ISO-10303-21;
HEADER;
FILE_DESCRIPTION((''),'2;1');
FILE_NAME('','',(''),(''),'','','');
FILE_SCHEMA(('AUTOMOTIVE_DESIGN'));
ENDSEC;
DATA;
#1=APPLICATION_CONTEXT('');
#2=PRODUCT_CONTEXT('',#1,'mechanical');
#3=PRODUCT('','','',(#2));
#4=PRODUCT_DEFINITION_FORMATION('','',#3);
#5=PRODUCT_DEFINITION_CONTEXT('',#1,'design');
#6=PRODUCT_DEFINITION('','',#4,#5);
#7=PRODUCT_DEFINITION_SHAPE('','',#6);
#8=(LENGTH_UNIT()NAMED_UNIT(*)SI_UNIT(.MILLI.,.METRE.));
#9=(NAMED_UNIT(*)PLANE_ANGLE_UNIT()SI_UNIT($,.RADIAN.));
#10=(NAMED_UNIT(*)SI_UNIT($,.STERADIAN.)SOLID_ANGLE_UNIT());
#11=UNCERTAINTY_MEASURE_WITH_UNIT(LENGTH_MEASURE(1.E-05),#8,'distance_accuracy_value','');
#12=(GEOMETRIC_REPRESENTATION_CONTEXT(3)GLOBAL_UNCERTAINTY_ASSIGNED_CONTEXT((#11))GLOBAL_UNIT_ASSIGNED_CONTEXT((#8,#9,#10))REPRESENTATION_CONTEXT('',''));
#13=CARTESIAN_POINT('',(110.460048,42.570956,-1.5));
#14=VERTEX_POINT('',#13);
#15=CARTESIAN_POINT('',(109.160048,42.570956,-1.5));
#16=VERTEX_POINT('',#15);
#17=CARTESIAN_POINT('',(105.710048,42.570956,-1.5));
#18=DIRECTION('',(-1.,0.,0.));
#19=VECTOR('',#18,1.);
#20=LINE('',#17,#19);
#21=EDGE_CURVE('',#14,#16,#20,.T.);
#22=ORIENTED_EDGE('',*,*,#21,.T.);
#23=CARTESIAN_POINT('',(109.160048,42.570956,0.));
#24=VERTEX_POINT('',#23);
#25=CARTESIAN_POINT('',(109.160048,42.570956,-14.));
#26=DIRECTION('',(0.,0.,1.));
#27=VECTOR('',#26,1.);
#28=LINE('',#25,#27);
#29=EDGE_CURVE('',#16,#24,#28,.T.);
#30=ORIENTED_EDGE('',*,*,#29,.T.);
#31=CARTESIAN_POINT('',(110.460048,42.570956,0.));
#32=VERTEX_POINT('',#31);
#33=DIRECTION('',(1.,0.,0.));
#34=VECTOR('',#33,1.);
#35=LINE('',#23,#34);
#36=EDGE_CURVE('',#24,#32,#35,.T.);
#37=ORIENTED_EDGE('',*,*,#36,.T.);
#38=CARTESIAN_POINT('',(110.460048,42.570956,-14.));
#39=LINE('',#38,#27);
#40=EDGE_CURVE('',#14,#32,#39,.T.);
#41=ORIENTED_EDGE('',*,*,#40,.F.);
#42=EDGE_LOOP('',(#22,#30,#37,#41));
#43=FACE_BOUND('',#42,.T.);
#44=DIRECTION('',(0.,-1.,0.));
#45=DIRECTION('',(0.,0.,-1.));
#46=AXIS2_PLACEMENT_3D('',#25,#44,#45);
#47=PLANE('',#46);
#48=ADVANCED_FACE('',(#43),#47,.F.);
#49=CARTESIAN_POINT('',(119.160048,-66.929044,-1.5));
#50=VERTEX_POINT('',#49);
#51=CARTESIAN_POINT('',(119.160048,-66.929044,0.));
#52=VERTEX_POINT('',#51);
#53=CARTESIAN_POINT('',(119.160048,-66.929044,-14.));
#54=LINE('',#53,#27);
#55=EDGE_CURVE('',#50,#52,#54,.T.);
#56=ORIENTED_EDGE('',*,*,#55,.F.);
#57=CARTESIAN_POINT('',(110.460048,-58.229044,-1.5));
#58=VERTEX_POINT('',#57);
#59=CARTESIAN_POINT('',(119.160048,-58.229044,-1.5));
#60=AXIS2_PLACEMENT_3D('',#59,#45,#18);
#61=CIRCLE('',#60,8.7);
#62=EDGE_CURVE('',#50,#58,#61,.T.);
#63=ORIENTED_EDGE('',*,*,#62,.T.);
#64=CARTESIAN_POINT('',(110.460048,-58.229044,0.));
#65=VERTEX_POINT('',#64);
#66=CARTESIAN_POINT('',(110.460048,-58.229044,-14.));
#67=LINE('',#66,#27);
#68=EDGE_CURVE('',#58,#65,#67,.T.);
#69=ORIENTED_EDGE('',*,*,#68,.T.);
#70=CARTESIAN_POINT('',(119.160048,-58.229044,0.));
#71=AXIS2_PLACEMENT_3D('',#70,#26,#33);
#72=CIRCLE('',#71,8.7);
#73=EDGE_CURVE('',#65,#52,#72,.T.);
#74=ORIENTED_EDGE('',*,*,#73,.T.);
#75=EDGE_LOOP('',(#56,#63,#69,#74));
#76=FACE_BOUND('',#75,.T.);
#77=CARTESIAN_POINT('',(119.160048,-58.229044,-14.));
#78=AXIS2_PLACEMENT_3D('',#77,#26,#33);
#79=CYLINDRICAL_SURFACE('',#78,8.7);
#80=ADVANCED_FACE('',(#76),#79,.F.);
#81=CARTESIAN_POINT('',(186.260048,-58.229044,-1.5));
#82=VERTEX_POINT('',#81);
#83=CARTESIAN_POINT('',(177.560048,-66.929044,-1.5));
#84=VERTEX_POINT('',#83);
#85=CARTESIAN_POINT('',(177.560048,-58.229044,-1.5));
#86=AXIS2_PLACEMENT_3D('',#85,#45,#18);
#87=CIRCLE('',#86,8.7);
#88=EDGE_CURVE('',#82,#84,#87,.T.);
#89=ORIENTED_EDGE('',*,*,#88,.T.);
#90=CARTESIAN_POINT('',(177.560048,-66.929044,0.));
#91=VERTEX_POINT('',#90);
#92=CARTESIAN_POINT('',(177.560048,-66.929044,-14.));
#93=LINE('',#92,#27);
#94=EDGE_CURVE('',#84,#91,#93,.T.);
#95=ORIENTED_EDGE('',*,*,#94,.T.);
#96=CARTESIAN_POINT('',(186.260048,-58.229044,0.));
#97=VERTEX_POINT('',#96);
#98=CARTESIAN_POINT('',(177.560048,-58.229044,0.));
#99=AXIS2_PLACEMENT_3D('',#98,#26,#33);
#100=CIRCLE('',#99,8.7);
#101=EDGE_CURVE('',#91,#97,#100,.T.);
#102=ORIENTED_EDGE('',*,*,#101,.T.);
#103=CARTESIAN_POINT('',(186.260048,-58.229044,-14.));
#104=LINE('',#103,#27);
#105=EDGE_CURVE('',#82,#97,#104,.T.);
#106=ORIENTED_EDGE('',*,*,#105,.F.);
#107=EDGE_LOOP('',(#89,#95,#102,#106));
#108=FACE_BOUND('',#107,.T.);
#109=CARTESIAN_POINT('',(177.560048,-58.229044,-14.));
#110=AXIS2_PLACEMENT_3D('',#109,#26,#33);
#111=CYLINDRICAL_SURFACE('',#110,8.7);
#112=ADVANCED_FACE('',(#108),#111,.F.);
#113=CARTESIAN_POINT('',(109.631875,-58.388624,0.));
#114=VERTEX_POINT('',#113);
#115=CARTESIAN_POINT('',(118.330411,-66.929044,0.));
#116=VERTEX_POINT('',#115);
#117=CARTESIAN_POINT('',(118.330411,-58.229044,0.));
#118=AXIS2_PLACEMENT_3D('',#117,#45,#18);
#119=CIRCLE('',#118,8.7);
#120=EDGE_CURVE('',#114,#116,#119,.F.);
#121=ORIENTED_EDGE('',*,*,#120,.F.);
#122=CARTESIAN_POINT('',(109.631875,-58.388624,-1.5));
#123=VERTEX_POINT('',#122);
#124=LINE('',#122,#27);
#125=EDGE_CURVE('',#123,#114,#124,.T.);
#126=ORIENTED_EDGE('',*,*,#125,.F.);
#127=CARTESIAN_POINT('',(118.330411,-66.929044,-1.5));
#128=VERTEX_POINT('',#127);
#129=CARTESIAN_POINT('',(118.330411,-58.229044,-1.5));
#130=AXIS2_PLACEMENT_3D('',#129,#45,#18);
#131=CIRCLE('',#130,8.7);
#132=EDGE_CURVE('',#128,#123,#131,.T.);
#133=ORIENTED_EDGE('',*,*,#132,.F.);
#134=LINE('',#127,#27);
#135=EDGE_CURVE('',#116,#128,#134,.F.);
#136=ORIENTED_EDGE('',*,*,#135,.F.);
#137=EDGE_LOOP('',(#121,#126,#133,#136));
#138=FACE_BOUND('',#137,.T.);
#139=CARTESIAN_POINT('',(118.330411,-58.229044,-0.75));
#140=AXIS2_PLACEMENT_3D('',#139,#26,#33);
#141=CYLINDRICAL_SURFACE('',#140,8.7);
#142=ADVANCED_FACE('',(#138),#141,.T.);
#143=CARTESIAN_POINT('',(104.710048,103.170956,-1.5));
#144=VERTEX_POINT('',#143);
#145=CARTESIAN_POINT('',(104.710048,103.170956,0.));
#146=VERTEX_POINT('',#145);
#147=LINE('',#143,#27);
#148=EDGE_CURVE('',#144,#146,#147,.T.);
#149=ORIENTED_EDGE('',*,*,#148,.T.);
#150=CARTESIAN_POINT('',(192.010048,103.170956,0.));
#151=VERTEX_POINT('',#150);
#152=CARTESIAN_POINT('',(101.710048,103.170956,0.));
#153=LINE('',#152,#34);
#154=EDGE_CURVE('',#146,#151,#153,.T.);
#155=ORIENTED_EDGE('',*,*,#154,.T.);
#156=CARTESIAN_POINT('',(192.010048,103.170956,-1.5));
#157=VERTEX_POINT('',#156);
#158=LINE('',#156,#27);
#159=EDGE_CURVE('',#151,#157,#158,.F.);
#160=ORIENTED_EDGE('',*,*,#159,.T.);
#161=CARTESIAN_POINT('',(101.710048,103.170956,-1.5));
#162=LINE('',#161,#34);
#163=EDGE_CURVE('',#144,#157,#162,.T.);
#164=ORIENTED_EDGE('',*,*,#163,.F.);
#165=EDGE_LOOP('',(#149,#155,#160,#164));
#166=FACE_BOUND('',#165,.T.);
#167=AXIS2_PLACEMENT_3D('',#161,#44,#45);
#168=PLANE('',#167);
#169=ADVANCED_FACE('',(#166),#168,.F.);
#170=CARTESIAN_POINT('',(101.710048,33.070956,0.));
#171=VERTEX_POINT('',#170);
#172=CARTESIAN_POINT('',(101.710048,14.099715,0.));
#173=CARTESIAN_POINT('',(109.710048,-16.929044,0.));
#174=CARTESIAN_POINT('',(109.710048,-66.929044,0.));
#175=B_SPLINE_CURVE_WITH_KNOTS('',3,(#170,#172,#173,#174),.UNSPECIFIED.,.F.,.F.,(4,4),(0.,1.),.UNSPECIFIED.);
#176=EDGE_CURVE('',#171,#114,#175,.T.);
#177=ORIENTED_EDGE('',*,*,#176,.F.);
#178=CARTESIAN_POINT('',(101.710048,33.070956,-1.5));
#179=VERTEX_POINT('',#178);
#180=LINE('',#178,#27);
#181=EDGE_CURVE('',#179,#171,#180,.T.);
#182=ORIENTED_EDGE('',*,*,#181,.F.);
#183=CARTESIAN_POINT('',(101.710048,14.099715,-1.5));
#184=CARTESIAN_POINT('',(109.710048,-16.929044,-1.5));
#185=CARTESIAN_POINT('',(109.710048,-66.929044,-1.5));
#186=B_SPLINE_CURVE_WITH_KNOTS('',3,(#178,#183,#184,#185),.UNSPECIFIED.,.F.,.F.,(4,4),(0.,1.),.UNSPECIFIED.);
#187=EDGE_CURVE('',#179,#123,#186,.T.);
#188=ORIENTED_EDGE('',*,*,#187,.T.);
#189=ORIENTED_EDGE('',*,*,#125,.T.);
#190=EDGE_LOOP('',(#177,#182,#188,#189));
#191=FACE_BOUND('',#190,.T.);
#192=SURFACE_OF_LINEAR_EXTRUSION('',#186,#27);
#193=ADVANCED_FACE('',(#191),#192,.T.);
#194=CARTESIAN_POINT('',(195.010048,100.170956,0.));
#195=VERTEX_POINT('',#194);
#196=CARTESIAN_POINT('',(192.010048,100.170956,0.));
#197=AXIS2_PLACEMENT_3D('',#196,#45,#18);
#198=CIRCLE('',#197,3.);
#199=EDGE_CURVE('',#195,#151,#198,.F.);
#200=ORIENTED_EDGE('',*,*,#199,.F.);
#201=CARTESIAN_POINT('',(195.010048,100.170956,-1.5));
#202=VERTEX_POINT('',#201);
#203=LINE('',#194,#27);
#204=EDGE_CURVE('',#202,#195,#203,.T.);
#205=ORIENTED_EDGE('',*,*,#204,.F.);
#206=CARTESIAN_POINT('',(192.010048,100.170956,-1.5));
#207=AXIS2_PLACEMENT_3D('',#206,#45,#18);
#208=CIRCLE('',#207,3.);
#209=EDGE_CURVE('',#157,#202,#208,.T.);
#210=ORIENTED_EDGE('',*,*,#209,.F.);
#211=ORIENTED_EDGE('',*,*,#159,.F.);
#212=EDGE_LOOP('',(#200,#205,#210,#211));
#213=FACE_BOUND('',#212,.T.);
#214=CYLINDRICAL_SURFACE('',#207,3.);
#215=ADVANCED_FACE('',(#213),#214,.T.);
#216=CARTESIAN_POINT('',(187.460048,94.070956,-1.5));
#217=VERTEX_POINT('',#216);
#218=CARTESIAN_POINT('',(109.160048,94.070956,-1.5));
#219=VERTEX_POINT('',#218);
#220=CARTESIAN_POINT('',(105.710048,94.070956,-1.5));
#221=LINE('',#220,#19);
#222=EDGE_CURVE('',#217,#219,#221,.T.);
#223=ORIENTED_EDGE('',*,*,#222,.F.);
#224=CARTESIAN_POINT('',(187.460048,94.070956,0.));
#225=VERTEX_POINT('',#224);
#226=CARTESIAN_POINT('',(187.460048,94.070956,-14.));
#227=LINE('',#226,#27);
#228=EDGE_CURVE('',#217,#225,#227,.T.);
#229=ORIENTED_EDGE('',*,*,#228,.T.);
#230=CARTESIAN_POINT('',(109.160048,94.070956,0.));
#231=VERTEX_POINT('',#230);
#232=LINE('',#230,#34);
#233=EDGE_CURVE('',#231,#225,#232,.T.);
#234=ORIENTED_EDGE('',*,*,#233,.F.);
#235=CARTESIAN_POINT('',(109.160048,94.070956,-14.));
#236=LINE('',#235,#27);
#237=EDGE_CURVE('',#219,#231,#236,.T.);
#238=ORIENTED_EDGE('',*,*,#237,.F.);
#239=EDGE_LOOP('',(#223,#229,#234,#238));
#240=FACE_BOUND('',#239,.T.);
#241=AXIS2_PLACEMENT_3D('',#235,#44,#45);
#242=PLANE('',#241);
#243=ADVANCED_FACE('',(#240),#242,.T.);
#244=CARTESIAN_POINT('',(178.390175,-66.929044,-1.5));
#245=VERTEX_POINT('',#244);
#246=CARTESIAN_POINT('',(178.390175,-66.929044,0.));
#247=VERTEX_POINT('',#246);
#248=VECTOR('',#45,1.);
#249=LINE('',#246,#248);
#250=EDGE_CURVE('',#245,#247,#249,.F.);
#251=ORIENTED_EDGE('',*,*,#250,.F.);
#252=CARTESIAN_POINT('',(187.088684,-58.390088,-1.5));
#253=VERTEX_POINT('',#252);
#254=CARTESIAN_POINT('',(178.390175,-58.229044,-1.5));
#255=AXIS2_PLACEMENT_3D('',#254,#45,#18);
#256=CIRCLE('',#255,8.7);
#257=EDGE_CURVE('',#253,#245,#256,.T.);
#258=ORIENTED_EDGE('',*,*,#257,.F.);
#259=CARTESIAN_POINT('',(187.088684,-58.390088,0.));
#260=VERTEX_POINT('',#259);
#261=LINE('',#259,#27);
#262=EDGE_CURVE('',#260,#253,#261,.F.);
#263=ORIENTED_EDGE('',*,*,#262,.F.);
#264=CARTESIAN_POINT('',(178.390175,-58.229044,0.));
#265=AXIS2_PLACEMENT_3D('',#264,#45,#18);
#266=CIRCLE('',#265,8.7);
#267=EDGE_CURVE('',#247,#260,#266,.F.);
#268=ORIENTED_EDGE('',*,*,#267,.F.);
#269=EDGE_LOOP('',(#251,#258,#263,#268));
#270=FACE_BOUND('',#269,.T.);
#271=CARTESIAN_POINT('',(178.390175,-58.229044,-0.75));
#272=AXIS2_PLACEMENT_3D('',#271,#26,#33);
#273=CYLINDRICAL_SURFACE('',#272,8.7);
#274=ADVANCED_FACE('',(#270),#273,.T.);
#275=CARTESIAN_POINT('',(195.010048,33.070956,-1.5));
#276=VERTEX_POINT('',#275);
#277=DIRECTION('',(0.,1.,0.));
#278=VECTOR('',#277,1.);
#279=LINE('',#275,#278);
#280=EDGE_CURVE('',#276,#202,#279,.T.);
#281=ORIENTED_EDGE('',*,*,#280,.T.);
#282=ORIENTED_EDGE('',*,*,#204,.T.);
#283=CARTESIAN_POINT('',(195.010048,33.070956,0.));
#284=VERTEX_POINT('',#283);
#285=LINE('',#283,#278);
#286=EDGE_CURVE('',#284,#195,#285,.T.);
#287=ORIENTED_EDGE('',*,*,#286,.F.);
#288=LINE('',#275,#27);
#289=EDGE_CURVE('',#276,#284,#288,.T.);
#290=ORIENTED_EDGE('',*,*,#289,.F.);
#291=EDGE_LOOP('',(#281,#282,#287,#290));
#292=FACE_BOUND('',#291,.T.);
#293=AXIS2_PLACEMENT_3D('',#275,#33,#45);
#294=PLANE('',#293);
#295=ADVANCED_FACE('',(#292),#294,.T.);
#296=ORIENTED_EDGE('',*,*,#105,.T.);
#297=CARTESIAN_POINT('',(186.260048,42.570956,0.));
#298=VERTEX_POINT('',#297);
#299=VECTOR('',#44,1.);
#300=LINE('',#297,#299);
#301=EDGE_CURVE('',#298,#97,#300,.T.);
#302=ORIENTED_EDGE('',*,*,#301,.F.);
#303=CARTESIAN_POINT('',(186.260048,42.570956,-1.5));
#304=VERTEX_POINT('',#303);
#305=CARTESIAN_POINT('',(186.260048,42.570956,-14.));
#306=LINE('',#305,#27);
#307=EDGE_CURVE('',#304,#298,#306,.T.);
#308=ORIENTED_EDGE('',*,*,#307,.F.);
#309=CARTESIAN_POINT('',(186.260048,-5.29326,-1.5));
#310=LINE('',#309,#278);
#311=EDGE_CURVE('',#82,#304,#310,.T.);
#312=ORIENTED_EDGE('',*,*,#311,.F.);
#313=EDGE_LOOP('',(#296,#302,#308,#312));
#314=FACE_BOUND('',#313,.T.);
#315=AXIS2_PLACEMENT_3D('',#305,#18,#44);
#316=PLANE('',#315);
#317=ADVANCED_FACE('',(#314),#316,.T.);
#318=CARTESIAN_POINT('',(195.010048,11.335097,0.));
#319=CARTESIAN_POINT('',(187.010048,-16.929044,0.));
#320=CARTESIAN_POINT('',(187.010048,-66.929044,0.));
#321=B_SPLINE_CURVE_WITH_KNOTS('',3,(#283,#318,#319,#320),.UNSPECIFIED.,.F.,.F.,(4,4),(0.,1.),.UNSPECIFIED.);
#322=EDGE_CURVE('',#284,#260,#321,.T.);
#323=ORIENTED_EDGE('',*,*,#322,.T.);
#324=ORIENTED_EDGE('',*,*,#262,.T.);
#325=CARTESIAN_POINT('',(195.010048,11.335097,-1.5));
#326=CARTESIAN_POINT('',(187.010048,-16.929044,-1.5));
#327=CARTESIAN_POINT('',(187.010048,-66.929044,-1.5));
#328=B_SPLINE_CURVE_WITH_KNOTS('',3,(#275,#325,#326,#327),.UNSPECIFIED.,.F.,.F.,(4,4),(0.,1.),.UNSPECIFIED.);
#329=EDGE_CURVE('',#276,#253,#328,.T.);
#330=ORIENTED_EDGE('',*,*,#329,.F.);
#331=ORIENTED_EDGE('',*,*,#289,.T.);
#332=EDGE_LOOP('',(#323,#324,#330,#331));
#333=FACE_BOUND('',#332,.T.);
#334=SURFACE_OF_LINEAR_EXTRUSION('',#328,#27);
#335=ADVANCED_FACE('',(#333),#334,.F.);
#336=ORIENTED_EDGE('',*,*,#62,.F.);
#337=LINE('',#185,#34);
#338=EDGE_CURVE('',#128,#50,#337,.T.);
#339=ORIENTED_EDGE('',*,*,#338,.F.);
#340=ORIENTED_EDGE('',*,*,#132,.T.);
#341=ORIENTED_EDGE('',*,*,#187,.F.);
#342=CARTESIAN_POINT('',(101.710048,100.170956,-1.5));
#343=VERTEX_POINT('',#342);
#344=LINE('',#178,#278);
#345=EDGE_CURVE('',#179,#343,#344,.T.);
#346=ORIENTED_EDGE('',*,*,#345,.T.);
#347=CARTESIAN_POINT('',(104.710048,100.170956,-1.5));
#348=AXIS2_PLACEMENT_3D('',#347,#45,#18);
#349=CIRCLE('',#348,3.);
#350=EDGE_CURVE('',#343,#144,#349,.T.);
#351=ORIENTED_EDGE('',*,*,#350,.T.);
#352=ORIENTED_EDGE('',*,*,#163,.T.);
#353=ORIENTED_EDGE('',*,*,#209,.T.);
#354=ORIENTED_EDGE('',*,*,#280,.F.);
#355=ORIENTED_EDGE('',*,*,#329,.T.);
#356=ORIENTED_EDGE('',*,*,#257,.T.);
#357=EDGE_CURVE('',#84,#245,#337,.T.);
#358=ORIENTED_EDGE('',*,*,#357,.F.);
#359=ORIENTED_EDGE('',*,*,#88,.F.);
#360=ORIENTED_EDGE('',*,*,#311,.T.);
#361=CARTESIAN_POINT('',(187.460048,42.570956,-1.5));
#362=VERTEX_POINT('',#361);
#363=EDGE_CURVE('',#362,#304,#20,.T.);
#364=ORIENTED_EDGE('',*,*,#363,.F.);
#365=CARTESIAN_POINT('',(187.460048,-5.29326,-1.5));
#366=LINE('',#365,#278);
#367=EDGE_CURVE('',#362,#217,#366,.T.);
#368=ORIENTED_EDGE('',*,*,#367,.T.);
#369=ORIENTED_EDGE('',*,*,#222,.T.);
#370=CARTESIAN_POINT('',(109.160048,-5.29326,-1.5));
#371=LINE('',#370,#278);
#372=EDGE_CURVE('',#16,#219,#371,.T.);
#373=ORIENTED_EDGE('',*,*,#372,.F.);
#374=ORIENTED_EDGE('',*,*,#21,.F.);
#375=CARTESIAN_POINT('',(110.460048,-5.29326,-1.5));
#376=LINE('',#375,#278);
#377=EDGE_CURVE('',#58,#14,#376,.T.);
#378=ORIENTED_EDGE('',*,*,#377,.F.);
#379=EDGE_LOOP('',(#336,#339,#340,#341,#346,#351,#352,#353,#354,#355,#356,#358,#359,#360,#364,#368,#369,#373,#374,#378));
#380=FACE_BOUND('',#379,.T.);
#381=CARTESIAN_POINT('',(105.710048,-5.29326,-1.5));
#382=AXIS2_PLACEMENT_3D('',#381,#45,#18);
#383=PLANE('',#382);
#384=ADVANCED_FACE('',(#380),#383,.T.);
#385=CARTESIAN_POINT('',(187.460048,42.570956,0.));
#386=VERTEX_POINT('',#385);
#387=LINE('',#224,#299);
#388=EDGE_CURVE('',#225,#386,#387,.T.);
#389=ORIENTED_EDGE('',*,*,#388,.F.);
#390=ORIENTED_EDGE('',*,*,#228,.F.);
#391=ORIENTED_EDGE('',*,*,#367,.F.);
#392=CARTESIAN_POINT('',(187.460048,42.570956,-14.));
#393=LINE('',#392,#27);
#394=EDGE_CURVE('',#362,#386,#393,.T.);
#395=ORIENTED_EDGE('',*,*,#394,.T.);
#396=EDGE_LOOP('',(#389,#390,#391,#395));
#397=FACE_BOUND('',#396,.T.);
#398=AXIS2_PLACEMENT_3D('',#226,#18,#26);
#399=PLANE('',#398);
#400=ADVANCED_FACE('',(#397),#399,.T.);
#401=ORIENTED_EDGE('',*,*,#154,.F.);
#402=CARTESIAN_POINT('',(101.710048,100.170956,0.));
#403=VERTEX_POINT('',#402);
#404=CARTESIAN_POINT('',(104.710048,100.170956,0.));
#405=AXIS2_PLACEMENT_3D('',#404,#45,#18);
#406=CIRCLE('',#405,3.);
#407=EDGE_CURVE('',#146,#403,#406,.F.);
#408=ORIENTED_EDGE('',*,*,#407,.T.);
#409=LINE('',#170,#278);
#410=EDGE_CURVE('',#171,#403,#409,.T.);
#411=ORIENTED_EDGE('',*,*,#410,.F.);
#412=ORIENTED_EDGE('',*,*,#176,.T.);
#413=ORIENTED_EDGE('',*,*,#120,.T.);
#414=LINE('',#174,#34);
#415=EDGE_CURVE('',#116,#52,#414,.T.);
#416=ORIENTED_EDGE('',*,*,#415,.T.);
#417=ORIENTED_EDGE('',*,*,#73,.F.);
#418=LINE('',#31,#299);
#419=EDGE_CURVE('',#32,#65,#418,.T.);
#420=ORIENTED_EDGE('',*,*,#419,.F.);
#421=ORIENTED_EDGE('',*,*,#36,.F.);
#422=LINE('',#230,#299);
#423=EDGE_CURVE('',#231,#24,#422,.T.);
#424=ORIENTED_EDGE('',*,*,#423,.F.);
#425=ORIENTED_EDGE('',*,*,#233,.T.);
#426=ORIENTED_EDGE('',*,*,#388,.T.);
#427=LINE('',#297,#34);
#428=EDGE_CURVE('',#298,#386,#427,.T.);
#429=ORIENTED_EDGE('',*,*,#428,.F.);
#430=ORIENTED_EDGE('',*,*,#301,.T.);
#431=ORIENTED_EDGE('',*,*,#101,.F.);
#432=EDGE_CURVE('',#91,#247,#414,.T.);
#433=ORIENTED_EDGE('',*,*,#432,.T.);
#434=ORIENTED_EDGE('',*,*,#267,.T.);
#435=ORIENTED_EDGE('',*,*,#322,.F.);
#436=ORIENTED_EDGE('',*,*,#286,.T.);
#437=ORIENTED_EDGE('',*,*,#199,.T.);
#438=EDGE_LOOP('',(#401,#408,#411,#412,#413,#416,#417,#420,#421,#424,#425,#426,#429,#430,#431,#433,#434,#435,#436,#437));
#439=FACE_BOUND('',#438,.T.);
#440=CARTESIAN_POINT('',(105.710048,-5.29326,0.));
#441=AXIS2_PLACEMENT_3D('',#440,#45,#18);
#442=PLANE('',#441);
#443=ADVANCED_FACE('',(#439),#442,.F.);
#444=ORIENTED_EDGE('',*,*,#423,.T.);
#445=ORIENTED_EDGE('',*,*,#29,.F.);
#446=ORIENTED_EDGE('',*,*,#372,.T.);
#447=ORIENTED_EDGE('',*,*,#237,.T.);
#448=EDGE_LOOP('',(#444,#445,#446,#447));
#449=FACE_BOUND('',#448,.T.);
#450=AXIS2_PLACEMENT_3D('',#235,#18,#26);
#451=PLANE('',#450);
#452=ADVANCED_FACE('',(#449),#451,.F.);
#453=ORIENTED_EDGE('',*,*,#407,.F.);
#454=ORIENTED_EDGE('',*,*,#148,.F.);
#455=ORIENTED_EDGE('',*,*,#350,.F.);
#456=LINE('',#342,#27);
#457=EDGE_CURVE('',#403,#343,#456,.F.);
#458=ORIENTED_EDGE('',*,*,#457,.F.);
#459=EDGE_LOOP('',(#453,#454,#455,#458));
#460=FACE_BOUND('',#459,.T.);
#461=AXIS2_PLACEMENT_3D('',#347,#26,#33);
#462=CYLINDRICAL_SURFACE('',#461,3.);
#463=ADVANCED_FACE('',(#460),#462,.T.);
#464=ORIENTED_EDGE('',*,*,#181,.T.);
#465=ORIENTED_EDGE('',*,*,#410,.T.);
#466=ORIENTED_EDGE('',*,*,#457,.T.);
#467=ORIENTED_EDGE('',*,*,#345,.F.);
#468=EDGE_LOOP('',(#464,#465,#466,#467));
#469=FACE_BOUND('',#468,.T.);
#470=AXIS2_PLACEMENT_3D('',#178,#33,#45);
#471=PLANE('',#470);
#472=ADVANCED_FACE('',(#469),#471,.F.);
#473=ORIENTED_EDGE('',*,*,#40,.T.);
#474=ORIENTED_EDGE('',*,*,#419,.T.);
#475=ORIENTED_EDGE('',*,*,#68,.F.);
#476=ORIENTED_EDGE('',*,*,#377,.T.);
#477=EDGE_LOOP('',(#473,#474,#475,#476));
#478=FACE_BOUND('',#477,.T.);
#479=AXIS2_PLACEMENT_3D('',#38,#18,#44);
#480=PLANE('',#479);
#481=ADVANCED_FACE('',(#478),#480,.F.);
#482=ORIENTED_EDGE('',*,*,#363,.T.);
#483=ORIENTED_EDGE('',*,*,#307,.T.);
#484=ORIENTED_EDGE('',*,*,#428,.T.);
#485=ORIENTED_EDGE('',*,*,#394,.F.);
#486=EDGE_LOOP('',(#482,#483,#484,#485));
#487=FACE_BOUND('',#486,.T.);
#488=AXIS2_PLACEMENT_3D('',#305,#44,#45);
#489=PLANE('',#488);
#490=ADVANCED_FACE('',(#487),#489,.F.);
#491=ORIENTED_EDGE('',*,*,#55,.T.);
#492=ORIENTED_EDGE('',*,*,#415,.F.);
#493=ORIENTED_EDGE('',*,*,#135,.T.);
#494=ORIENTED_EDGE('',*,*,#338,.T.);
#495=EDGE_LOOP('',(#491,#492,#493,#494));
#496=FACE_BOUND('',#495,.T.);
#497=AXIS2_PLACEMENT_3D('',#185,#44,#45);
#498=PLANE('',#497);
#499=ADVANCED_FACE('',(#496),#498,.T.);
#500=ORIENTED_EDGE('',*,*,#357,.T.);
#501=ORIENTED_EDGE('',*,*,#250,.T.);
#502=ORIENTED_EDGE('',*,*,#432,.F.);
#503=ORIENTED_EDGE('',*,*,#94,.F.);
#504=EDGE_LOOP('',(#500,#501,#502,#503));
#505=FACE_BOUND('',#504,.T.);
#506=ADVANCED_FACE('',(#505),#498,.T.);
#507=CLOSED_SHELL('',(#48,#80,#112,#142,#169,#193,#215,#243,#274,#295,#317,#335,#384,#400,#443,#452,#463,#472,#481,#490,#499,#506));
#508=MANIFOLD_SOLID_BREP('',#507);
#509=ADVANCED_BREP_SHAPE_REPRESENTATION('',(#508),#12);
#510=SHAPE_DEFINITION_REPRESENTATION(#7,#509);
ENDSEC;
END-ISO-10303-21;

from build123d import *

# Parameters (mm, degrees)
BOSS_EXTRUDE1_START = -1.5
BOSS_EXTRUDE1_DEPTH = 1.5
CUT_EXTRUDE1_DEPTH  = 14
FILLET1_R           = 8.7
FILLET2_R           = 3


# Read off the part's stored shape, not the designer's step: Boss-Extrude1
with BuildPart() as part:
    # Boss-Extrude1 outline → Boss-Extrude1 (new body)
    with BuildSketch(Plane.XY.offset(BOSS_EXTRUDE1_START)):
        with BuildLine():
            Line((101.710048323, 103.170955585), (101.710048323, 33.070955585))
            add(Edge.make_bspline(
                [(101.710048323, 33.070955585), (101.710048323, 14.099715191), (109.710048323, -16.929044415), (109.710048323, -66.929044415)],
                knots=[0, 0, 0, 0, 1, 1, 1, 1], degree=3))
            Line((109.710048323, -66.929044415), (187.010048323, -66.929044415))
            add(Edge.make_bspline(
                [(195.010048323, 33.070955585), (195.010048323, 11.335097122), (187.010048323, -16.929044415), (187.010048323, -66.929044415)],
                knots=[0, 0, 0, 0, 1, 1, 1, 1], degree=3))
            Line((195.010048323, 33.070955585), (195.010048323, 103.170955585))
            Line((195.010048323, 103.170955585), (101.710048323, 103.170955585))
        make_face()
    extrude(amount=BOSS_EXTRUDE1_DEPTH)

    # Sketch2 → Cut-Extrude1 (cut)
    with BuildSketch(Plane.XY):
        with BuildLine():
            Line((109.160048323, 94.070955585), (187.460048323, 94.070955585))
            Line((187.460048323, 94.070955585), (187.460048323, 42.570955585))
            Line((187.460048323, 42.570955585), (186.260048323, 42.570955585))
            Line((186.260048323, 42.570955585), (186.260048323, -58.229044415))
            ThreePointArc((186.260048323, -58.229044415), (183.711877319, -64.380873411), (177.560048323, -66.929044415))
            Line((177.560048323, -66.929044415), (119.160048323, -66.929044415))
            ThreePointArc((119.160048323, -66.929044415), (113.008219327, -64.380873411), (110.460048323, -58.229044415))
            Line((110.460048323, -58.229044415), (110.460048323, 42.570955585))
            Line((110.460048323, 42.570955585), (109.160048323, 42.570955585))
            Line((109.160048323, 42.570955585), (109.160048323, 94.070955585))
        make_face()
    extrude(amount=-CUT_EXTRUDE1_DEPTH, mode=Mode.SUBTRACT)

    # Fillet1
    fillet1_edges = [part.edges().sort_by_distance(p)[0] for p in [
        (187.010048323, -66.929044415, -0.75),
        (109.710048323, -66.929044415, -0.75),
    ]]
    fillet(fillet1_edges, radius=FILLET1_R)

    # Fillet2
    fillet2_edges = [part.edges().sort_by_distance(p)[0] for p in [
        (101.710048323, 103.170955585, -0.75),
        (195.010048323, 103.170955585, -0.75),
    ]]
    fillet(fillet2_edges, radius=FILLET2_R)


solid = part.part
